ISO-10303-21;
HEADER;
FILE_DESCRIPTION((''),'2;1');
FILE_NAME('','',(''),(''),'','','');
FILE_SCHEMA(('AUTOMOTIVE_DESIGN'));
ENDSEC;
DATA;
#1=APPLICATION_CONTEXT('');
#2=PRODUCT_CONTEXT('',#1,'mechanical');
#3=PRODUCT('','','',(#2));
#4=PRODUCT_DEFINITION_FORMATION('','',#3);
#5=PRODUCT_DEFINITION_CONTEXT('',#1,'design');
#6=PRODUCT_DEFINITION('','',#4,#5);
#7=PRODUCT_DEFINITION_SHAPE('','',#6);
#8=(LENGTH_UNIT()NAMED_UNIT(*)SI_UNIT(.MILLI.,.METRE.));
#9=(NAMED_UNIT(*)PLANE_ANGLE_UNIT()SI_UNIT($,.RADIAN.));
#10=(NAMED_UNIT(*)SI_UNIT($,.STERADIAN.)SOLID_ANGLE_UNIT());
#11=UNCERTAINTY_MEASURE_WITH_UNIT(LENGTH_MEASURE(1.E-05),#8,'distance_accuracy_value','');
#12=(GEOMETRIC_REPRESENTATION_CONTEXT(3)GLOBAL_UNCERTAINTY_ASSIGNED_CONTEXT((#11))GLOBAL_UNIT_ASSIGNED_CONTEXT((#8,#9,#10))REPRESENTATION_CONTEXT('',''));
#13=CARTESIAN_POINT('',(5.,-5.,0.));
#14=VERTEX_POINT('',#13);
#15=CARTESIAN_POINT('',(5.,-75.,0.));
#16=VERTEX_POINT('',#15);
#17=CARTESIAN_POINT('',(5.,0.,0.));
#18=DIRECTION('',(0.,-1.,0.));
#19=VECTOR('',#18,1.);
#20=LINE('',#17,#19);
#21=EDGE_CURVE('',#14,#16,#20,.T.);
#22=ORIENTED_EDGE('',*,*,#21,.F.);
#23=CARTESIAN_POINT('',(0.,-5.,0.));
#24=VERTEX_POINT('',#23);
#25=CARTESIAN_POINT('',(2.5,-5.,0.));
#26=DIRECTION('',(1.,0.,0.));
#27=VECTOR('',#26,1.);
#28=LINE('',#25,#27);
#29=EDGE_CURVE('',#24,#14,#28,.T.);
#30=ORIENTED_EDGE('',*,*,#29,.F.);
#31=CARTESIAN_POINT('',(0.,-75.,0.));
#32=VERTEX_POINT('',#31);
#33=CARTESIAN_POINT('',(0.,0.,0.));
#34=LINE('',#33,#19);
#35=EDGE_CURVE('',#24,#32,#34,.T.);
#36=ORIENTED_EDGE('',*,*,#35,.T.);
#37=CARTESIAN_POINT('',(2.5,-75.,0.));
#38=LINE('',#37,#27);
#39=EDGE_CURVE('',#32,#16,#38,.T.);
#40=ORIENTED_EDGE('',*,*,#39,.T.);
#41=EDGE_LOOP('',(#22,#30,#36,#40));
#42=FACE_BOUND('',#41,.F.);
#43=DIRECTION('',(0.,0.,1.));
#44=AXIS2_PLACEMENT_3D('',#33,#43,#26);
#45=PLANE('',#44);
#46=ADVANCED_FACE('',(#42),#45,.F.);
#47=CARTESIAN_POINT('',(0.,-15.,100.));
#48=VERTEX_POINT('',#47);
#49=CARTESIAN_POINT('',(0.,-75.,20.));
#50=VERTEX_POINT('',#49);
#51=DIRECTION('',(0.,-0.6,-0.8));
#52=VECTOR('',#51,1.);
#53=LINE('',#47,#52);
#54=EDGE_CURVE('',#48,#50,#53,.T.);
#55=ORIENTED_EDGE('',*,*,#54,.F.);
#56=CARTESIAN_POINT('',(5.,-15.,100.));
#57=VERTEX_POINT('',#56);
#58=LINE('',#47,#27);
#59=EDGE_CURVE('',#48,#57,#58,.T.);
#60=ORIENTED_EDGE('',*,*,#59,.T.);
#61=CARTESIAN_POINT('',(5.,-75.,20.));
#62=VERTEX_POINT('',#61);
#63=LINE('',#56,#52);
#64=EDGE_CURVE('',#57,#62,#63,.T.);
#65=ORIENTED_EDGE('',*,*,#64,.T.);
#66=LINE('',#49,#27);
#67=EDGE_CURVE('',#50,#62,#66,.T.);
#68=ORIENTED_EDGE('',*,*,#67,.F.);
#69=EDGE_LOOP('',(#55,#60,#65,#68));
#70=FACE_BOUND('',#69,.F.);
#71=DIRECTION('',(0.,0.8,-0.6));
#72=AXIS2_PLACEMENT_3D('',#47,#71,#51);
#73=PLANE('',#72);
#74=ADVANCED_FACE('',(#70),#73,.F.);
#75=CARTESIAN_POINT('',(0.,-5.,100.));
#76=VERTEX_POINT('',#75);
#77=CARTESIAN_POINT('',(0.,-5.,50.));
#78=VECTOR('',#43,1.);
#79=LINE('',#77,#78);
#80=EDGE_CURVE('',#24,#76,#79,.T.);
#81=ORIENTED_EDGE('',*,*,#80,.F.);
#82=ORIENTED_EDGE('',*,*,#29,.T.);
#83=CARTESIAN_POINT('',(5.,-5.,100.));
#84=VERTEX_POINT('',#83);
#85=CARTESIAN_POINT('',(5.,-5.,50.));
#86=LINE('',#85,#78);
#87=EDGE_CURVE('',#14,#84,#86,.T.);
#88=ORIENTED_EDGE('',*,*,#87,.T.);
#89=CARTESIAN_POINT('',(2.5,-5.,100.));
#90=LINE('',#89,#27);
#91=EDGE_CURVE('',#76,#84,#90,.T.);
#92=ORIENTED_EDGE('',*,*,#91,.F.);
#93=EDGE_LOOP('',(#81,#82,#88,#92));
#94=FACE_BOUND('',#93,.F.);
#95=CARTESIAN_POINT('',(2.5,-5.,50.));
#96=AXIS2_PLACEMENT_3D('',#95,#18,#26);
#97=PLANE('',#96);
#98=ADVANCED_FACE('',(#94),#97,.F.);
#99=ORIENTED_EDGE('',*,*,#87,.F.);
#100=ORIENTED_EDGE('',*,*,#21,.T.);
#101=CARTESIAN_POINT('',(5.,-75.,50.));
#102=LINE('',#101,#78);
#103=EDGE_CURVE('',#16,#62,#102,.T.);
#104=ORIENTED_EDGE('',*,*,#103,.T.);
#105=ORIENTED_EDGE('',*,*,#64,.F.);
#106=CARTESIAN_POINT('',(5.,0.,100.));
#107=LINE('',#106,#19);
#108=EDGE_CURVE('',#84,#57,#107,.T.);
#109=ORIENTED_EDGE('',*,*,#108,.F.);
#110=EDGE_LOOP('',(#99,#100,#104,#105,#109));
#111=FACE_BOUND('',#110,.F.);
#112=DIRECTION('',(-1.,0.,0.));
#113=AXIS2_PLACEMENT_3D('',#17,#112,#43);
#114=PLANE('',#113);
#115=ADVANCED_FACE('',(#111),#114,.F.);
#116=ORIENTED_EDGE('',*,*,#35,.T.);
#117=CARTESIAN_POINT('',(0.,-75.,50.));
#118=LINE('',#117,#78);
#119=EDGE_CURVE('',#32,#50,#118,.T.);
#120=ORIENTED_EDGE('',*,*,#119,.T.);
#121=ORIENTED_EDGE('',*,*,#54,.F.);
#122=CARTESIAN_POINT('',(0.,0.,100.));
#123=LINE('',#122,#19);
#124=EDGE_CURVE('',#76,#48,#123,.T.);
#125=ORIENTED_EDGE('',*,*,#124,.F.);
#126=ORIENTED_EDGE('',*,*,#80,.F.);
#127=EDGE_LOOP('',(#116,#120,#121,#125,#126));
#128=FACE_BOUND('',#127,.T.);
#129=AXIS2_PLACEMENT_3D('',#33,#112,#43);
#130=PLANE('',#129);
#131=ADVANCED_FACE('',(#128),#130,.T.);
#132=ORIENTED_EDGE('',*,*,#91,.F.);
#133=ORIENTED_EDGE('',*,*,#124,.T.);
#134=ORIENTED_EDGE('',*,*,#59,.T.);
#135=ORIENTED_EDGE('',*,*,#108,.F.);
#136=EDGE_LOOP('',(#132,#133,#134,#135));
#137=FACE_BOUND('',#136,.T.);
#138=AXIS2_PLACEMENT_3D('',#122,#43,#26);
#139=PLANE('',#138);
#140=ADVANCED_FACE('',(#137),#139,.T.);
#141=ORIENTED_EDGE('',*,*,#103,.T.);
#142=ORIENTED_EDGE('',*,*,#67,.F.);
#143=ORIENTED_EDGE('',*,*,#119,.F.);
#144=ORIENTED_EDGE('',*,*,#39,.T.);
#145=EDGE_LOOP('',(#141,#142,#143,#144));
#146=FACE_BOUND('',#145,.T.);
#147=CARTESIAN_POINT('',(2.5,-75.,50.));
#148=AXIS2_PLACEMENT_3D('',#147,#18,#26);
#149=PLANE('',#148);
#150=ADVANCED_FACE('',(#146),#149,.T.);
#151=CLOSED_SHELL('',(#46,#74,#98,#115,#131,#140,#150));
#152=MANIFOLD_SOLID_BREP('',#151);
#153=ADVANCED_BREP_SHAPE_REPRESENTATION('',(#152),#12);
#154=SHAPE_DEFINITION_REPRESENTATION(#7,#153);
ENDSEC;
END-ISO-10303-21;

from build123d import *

# Parameters (mm, degrees)
F0_W     = 5
F0_H     = 100
F1_DEPTH = 75
F3_DEPTH = 5
F4_DEPTH = 5


with BuildPart() as f1:
    # F0 (on Front) → F1 (new body)
    with BuildSketch(Plane.XZ):
        with Locations((2.5, 50)):
            Rectangle(F0_W, F0_H)
    extrude(amount=F1_DEPTH)

    # F2 (on face) → F3 (cut)
    with BuildSketch(Plane(origin=(0, 0, 0), x_dir=(0, -1, 0), z_dir=(-1, 0, 0))):
        Polygon((75, 100), (15, 100), (75, 20), align=None)
    extrude(amount=-F3_DEPTH, mode=Mode.SUBTRACT)

    # F4 (cut): a face of the model
    f4_faces = [f1.faces().sort_by_distance(p)[0] for p in [
        (2.5, 0, 50),
    ]]
    extrude(f4_faces, amount=-F4_DEPTH, mode=Mode.SUBTRACT)


solid = f1.part
